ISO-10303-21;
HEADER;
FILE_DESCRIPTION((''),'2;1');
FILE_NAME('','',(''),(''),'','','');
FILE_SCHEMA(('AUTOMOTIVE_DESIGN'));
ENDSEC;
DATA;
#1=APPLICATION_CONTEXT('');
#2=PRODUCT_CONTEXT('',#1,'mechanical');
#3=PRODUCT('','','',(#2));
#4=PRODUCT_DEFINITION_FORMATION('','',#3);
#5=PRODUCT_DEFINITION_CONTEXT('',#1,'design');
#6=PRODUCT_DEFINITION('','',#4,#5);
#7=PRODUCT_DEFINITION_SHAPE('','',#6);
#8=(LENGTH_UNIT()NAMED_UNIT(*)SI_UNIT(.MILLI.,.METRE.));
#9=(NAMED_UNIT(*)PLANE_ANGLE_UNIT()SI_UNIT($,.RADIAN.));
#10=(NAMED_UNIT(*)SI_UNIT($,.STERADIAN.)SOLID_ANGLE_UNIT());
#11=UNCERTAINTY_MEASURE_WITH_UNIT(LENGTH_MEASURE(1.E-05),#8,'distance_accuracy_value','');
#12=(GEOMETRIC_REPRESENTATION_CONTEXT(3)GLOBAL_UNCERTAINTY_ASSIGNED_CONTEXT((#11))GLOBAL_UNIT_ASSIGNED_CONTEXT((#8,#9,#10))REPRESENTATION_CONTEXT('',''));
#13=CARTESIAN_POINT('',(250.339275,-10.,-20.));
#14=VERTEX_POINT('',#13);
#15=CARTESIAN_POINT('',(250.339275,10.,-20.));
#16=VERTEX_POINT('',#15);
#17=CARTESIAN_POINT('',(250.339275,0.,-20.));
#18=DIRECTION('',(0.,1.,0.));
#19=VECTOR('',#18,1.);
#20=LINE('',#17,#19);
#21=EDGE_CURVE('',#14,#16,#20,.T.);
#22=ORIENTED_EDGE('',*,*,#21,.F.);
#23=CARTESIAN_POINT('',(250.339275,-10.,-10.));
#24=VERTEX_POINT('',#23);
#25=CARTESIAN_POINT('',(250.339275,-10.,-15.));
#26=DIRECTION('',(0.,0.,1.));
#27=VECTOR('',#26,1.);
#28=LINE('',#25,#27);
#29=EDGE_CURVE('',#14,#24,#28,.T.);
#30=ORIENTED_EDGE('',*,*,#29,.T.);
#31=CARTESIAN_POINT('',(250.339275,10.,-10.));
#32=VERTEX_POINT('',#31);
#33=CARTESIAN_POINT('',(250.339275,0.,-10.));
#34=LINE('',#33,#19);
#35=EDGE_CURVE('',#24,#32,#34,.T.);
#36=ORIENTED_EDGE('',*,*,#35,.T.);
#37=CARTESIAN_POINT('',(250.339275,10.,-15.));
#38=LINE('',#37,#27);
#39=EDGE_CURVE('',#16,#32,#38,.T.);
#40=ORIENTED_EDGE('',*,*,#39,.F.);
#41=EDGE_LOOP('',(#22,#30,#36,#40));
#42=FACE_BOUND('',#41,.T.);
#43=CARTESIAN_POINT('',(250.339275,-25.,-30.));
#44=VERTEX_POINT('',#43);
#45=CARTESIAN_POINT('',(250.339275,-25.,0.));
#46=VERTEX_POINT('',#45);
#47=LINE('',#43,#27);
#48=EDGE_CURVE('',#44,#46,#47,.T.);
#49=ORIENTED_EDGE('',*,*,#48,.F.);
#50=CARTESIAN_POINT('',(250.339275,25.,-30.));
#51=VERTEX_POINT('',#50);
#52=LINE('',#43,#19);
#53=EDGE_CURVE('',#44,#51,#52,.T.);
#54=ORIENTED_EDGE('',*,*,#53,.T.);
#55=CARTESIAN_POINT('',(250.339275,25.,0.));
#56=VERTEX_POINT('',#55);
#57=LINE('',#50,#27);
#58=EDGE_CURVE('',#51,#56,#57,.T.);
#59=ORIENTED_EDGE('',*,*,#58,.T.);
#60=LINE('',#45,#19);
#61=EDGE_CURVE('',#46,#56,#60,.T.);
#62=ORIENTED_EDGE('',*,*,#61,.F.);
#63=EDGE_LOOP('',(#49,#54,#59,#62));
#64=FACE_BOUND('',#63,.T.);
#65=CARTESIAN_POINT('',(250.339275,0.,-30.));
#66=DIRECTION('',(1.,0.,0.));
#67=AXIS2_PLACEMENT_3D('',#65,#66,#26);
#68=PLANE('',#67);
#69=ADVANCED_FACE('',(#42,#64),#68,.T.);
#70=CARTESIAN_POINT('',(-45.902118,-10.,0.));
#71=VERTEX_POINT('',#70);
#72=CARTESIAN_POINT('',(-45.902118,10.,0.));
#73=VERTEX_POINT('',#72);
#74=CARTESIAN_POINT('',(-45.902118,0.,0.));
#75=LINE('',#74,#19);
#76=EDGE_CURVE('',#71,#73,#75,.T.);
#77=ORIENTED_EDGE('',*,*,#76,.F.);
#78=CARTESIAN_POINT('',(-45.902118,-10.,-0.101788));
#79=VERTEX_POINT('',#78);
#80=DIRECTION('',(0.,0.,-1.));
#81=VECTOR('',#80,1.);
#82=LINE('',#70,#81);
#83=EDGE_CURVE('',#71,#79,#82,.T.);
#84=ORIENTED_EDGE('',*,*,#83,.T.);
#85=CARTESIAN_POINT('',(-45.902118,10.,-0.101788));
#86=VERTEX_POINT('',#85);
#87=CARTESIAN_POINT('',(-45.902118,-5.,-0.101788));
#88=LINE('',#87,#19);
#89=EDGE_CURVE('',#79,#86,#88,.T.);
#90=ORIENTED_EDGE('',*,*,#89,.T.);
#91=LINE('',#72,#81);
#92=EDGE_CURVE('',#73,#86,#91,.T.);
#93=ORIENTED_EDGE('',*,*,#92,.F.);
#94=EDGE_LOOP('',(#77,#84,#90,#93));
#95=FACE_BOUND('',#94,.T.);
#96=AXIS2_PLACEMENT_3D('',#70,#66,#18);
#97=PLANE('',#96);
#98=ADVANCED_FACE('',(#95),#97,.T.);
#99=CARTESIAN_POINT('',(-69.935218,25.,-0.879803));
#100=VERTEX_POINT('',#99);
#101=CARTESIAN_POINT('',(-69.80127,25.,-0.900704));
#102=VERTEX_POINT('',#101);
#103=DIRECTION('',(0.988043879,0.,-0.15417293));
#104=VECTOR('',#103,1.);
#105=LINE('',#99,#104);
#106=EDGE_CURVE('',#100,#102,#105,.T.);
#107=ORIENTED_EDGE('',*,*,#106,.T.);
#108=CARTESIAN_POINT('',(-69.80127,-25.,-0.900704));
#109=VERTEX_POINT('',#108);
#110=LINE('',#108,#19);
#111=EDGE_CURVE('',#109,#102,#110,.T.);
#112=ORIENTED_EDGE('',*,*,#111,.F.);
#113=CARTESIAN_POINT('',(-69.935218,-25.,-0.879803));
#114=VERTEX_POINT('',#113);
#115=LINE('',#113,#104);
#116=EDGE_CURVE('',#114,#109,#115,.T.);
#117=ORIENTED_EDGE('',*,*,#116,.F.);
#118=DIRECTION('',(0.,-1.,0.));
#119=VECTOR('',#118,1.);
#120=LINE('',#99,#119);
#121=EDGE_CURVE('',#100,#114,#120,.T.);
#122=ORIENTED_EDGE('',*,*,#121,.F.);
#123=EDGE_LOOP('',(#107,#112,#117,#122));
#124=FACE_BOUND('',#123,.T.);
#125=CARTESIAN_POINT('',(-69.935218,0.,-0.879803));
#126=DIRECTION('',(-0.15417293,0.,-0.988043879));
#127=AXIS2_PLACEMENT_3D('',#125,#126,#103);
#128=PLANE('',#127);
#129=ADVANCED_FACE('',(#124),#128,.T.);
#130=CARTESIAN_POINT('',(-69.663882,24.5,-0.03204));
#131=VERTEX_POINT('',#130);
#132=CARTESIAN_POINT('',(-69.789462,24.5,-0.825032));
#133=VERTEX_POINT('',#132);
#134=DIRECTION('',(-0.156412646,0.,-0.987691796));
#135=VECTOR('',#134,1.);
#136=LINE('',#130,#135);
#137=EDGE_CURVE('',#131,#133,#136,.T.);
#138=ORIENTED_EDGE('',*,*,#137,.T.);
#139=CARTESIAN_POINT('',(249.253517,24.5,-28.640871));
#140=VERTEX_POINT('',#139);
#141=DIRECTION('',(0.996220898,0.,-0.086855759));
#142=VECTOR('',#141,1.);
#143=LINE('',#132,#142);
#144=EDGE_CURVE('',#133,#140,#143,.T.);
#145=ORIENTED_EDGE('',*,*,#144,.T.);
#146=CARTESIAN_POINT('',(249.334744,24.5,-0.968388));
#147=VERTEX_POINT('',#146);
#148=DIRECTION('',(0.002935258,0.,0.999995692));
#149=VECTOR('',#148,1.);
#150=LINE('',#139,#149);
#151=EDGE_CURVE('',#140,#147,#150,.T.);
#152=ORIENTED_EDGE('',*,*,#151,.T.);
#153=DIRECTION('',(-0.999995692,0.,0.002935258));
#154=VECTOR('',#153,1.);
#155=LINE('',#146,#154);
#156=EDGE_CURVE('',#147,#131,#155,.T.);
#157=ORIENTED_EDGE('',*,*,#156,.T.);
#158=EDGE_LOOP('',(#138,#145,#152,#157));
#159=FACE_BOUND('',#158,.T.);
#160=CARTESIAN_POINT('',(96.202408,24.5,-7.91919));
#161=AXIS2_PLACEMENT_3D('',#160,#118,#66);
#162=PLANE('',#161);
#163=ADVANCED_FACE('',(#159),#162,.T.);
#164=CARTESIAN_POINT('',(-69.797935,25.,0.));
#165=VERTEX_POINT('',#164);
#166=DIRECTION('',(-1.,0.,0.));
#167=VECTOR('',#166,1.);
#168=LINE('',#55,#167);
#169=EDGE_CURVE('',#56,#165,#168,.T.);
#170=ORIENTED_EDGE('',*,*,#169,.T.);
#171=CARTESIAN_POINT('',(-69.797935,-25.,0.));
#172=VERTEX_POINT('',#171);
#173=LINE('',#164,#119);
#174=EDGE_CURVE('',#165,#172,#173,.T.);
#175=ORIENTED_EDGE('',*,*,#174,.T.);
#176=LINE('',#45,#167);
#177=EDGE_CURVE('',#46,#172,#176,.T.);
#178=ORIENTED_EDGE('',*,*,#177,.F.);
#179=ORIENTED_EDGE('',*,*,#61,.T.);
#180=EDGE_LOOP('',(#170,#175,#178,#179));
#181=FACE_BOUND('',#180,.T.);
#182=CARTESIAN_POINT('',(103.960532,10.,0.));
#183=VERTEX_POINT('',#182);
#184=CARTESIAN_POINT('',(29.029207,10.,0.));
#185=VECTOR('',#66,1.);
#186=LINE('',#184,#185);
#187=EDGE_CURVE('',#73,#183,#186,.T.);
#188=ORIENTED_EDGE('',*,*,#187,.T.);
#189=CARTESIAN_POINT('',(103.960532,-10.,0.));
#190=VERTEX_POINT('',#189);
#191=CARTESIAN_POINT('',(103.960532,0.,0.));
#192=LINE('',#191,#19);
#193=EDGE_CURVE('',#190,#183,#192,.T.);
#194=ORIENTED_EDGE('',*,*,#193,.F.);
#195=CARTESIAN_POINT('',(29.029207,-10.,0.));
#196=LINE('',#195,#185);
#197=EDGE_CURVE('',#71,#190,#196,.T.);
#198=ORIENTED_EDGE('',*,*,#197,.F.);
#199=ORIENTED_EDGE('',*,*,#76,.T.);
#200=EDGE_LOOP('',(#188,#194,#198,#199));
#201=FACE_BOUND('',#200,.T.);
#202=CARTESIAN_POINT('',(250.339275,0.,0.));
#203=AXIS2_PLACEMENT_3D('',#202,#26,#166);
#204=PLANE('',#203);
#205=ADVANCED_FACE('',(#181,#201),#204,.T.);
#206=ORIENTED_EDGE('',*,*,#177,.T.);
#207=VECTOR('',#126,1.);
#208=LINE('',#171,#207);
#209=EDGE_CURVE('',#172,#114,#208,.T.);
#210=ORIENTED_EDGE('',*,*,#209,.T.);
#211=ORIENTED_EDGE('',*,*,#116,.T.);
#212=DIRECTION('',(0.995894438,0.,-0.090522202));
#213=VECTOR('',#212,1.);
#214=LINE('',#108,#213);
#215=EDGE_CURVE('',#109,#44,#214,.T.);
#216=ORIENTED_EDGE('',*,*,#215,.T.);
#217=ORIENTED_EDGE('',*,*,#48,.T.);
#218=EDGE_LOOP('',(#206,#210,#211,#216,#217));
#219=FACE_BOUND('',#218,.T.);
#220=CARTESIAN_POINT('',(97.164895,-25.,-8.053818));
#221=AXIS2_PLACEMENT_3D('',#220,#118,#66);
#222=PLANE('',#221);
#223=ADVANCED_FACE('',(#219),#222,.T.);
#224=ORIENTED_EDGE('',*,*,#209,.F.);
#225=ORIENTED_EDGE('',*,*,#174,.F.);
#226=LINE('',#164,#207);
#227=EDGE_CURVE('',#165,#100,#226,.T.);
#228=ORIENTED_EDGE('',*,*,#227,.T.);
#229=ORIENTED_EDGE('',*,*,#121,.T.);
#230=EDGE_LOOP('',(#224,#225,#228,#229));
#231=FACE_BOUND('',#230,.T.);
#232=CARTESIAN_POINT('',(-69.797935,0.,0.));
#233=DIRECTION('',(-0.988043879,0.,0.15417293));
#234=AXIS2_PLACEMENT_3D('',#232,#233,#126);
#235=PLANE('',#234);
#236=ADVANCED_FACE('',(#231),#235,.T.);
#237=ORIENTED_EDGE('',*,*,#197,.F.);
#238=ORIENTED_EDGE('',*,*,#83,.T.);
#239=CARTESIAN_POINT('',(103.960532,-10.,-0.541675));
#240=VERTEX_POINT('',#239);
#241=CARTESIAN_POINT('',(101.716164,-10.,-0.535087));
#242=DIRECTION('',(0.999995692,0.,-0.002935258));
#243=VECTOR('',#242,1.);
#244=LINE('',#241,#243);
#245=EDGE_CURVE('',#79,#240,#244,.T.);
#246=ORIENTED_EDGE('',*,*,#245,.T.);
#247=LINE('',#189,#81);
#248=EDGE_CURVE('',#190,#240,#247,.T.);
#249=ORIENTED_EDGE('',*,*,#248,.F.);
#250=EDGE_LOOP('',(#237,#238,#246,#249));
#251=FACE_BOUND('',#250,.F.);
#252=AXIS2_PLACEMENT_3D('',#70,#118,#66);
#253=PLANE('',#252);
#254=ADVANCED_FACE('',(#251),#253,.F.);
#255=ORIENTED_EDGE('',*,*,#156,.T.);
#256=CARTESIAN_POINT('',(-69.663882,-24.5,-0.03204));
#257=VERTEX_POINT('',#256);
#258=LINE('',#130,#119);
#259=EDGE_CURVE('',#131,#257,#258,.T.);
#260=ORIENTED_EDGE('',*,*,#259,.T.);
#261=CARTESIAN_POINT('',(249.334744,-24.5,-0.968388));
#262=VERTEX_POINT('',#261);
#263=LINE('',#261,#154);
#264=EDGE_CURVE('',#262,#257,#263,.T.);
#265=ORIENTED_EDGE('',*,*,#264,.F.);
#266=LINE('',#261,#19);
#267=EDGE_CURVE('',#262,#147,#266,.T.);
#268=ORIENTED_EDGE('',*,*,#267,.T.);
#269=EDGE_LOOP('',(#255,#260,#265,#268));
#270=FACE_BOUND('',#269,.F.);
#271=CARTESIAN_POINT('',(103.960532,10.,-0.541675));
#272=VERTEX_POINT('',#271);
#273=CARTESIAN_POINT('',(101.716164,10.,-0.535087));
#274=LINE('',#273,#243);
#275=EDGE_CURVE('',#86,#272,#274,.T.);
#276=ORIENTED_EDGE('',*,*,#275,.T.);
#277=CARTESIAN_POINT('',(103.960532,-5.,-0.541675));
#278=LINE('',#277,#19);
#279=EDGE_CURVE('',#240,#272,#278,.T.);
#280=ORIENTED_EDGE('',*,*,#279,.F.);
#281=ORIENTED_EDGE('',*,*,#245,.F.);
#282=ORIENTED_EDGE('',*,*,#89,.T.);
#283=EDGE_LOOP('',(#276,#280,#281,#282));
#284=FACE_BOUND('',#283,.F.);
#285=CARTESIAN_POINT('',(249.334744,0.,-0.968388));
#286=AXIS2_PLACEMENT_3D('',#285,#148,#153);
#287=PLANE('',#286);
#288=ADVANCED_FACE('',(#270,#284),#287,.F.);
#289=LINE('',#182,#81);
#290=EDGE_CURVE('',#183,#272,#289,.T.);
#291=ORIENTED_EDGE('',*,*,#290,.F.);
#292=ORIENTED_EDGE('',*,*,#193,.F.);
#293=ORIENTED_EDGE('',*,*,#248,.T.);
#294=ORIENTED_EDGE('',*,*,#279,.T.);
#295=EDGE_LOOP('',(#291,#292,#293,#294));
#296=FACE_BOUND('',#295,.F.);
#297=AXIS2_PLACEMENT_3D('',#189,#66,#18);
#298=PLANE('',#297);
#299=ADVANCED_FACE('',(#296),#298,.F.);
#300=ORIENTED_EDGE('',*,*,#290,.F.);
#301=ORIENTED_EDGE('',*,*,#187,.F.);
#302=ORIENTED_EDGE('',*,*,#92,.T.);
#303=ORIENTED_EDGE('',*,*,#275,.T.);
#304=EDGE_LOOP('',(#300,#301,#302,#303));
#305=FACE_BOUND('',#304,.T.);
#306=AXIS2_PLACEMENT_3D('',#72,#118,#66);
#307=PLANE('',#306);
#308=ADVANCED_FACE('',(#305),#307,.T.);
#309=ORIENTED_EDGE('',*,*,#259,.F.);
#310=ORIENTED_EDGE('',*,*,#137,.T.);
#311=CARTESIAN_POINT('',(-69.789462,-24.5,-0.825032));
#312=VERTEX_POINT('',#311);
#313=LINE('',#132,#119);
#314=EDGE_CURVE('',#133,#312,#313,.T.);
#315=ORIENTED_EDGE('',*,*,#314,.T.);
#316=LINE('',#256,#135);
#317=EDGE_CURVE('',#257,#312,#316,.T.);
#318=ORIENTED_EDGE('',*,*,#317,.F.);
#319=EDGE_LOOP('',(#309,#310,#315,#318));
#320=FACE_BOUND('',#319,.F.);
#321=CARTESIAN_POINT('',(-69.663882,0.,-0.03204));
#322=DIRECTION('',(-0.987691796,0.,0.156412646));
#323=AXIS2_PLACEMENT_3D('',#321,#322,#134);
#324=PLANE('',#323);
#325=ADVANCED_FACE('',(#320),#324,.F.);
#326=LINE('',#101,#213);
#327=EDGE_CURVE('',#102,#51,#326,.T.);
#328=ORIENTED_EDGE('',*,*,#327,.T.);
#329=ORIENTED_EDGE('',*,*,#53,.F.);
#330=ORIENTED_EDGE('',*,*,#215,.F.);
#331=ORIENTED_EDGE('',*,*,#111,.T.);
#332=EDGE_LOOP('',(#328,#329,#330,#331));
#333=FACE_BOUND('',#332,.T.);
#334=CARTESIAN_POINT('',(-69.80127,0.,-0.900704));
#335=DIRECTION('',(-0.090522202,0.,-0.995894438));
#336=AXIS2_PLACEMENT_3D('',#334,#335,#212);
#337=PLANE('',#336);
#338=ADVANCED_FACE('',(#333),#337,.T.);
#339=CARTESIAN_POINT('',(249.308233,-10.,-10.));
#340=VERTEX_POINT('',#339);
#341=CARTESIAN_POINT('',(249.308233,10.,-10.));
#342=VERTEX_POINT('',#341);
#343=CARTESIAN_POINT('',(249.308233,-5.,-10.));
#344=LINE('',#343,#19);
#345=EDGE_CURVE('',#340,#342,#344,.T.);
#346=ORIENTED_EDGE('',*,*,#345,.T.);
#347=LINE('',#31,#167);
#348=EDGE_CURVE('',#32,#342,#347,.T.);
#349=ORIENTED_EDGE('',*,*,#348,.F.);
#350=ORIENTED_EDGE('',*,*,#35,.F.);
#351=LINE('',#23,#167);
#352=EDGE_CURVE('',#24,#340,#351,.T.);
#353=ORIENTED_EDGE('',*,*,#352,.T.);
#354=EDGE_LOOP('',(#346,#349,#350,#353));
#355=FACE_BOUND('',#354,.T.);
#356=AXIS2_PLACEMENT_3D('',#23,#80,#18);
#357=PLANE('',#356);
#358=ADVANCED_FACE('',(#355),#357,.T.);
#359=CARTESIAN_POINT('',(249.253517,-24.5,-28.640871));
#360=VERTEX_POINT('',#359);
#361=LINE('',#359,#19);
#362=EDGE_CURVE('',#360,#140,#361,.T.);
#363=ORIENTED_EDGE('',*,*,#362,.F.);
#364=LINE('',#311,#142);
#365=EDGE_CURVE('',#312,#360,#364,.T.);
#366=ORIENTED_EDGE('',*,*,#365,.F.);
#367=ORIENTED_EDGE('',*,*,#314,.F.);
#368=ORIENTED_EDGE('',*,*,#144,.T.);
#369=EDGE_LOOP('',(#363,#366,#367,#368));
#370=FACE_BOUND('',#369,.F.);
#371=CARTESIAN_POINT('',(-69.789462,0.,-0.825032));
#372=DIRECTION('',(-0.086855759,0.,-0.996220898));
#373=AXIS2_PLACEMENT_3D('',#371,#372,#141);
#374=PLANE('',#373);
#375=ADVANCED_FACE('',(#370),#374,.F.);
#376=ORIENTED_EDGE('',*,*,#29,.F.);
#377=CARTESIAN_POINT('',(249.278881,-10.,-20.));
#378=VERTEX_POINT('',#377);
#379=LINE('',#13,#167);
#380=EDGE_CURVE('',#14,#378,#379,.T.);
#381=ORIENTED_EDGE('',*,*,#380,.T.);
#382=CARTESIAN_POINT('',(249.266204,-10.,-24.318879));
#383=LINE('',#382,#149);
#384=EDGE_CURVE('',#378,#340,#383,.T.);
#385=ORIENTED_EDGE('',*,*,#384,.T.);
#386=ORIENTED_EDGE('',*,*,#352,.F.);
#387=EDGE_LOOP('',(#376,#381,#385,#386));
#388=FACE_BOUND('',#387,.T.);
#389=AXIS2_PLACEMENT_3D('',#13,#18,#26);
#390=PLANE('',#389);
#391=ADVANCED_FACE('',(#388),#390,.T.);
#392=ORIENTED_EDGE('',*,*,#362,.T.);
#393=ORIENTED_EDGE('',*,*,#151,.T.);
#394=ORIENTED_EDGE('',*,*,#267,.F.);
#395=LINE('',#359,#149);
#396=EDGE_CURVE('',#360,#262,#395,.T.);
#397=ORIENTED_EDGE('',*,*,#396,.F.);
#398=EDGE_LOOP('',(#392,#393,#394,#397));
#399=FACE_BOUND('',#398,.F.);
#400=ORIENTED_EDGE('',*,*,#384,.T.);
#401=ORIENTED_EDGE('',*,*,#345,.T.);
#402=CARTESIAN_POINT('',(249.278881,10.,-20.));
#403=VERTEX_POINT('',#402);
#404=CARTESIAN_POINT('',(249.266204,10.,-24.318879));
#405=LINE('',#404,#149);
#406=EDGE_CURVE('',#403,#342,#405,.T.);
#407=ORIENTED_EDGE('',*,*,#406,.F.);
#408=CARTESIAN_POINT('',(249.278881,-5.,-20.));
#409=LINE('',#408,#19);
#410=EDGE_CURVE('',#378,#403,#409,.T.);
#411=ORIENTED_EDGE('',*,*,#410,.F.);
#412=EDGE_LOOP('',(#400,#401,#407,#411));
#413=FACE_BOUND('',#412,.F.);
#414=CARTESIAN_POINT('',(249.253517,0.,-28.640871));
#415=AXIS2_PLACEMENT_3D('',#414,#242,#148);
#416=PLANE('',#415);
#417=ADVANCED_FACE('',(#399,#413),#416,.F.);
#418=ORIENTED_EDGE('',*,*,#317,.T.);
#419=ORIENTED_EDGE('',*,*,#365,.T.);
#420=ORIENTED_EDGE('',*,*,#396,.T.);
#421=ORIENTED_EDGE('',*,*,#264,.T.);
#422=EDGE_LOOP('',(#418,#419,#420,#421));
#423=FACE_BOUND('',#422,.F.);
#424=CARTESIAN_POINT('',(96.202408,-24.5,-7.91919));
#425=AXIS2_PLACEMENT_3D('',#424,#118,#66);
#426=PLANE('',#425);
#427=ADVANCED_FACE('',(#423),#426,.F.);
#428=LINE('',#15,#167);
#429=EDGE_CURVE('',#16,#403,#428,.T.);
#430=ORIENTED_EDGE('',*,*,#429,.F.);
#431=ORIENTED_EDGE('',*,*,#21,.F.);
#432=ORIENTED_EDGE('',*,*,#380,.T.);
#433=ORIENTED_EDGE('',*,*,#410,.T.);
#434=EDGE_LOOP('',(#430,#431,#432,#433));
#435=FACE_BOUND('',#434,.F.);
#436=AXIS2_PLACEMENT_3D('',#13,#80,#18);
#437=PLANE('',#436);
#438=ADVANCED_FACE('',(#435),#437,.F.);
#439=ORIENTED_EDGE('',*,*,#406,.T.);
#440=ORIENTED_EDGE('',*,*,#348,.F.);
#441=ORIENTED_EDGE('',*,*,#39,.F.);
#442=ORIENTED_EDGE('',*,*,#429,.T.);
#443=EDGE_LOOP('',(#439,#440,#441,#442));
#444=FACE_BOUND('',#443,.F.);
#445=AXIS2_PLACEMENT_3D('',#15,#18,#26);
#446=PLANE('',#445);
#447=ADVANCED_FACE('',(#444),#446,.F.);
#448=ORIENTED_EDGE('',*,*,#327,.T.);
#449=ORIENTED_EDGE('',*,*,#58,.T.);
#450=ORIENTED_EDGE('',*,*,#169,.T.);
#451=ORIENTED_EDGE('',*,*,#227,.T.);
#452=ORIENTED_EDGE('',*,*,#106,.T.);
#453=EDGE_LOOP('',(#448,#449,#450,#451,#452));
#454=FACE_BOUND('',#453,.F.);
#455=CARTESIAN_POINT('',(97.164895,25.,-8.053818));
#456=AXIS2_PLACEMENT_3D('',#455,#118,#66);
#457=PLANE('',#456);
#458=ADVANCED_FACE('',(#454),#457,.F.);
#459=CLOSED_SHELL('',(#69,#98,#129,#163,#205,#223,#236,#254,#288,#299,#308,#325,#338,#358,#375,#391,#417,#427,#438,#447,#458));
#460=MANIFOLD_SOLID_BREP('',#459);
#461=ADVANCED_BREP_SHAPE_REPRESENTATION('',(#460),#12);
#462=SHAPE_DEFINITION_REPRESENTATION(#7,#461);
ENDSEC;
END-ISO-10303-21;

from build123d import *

# Parameters (mm, degrees)
F1_DEPTH = 25
F2_DEPTH = 24.5
F3_W     = 20
F3_H     = 10
F4_DEPTH = 1.061394367
F5_W     = 149.8626496709
F5_H     = 20
F6_DEPTH = 0.5426750459


# Not quite as in the source:
# - a feature names something its author has since deleted; it is built from what else it names


with BuildPart() as f1:
    # F0 (on Front) → F1 (new body, symmetric)
    with BuildSketch(Plane.XZ):
        Polygon((250.3392749669, 0), (-69.6607250331, 0), (-69.7979346905, 0), (-69.9352178344, -0.8798027663), (-69.8012695535, -0.9007038612), (250.3392749669, -30), align=None)
        Polygon((-69.7894617915, -0.8250317769), (-69.6638822556, -0.0320404142), (249.3347435311, -0.9683876885), (249.2535173062, -28.6408707924), align=None, mode=Mode.SUBTRACT)
        Polygon((249.3347435311, -0.9683876885), (-69.6638822556, -0.0320404142), (-69.7894617915, -0.8250317769), (249.2535173062, -28.6408707924), align=None)
    extrude(amount=F1_DEPTH, both=True)

    # F0 (on Front) → F2 (cut, symmetric)
    with BuildSketch(Plane.XZ):
        Polygon((249.3347435311, -0.9683876885), (-69.6638822556, -0.0320404142), (-69.7894617915, -0.8250317769), (249.2535173062, -28.6408707924), align=None)
    extrude(amount=F2_DEPTH, both=True, mode=Mode.SUBTRACT)

    # F3 (on face) → F4 (cut, through all)
    with BuildSketch(Plane.YZ.offset(250.3392749669)):
        with Locations((0, -15)):
            Rectangle(F3_W, F3_H)
    extrude(amount=-F4_DEPTH, mode=Mode.SUBTRACT)

    # F5 (on face) → F6 (cut, through all)
    with BuildSketch(Plane.XY):
        with Locations((29.0292073041, 0)):
            Rectangle(F5_W, F5_H)
    extrude(amount=-F6_DEPTH, mode=Mode.SUBTRACT)


solid = f1.part
